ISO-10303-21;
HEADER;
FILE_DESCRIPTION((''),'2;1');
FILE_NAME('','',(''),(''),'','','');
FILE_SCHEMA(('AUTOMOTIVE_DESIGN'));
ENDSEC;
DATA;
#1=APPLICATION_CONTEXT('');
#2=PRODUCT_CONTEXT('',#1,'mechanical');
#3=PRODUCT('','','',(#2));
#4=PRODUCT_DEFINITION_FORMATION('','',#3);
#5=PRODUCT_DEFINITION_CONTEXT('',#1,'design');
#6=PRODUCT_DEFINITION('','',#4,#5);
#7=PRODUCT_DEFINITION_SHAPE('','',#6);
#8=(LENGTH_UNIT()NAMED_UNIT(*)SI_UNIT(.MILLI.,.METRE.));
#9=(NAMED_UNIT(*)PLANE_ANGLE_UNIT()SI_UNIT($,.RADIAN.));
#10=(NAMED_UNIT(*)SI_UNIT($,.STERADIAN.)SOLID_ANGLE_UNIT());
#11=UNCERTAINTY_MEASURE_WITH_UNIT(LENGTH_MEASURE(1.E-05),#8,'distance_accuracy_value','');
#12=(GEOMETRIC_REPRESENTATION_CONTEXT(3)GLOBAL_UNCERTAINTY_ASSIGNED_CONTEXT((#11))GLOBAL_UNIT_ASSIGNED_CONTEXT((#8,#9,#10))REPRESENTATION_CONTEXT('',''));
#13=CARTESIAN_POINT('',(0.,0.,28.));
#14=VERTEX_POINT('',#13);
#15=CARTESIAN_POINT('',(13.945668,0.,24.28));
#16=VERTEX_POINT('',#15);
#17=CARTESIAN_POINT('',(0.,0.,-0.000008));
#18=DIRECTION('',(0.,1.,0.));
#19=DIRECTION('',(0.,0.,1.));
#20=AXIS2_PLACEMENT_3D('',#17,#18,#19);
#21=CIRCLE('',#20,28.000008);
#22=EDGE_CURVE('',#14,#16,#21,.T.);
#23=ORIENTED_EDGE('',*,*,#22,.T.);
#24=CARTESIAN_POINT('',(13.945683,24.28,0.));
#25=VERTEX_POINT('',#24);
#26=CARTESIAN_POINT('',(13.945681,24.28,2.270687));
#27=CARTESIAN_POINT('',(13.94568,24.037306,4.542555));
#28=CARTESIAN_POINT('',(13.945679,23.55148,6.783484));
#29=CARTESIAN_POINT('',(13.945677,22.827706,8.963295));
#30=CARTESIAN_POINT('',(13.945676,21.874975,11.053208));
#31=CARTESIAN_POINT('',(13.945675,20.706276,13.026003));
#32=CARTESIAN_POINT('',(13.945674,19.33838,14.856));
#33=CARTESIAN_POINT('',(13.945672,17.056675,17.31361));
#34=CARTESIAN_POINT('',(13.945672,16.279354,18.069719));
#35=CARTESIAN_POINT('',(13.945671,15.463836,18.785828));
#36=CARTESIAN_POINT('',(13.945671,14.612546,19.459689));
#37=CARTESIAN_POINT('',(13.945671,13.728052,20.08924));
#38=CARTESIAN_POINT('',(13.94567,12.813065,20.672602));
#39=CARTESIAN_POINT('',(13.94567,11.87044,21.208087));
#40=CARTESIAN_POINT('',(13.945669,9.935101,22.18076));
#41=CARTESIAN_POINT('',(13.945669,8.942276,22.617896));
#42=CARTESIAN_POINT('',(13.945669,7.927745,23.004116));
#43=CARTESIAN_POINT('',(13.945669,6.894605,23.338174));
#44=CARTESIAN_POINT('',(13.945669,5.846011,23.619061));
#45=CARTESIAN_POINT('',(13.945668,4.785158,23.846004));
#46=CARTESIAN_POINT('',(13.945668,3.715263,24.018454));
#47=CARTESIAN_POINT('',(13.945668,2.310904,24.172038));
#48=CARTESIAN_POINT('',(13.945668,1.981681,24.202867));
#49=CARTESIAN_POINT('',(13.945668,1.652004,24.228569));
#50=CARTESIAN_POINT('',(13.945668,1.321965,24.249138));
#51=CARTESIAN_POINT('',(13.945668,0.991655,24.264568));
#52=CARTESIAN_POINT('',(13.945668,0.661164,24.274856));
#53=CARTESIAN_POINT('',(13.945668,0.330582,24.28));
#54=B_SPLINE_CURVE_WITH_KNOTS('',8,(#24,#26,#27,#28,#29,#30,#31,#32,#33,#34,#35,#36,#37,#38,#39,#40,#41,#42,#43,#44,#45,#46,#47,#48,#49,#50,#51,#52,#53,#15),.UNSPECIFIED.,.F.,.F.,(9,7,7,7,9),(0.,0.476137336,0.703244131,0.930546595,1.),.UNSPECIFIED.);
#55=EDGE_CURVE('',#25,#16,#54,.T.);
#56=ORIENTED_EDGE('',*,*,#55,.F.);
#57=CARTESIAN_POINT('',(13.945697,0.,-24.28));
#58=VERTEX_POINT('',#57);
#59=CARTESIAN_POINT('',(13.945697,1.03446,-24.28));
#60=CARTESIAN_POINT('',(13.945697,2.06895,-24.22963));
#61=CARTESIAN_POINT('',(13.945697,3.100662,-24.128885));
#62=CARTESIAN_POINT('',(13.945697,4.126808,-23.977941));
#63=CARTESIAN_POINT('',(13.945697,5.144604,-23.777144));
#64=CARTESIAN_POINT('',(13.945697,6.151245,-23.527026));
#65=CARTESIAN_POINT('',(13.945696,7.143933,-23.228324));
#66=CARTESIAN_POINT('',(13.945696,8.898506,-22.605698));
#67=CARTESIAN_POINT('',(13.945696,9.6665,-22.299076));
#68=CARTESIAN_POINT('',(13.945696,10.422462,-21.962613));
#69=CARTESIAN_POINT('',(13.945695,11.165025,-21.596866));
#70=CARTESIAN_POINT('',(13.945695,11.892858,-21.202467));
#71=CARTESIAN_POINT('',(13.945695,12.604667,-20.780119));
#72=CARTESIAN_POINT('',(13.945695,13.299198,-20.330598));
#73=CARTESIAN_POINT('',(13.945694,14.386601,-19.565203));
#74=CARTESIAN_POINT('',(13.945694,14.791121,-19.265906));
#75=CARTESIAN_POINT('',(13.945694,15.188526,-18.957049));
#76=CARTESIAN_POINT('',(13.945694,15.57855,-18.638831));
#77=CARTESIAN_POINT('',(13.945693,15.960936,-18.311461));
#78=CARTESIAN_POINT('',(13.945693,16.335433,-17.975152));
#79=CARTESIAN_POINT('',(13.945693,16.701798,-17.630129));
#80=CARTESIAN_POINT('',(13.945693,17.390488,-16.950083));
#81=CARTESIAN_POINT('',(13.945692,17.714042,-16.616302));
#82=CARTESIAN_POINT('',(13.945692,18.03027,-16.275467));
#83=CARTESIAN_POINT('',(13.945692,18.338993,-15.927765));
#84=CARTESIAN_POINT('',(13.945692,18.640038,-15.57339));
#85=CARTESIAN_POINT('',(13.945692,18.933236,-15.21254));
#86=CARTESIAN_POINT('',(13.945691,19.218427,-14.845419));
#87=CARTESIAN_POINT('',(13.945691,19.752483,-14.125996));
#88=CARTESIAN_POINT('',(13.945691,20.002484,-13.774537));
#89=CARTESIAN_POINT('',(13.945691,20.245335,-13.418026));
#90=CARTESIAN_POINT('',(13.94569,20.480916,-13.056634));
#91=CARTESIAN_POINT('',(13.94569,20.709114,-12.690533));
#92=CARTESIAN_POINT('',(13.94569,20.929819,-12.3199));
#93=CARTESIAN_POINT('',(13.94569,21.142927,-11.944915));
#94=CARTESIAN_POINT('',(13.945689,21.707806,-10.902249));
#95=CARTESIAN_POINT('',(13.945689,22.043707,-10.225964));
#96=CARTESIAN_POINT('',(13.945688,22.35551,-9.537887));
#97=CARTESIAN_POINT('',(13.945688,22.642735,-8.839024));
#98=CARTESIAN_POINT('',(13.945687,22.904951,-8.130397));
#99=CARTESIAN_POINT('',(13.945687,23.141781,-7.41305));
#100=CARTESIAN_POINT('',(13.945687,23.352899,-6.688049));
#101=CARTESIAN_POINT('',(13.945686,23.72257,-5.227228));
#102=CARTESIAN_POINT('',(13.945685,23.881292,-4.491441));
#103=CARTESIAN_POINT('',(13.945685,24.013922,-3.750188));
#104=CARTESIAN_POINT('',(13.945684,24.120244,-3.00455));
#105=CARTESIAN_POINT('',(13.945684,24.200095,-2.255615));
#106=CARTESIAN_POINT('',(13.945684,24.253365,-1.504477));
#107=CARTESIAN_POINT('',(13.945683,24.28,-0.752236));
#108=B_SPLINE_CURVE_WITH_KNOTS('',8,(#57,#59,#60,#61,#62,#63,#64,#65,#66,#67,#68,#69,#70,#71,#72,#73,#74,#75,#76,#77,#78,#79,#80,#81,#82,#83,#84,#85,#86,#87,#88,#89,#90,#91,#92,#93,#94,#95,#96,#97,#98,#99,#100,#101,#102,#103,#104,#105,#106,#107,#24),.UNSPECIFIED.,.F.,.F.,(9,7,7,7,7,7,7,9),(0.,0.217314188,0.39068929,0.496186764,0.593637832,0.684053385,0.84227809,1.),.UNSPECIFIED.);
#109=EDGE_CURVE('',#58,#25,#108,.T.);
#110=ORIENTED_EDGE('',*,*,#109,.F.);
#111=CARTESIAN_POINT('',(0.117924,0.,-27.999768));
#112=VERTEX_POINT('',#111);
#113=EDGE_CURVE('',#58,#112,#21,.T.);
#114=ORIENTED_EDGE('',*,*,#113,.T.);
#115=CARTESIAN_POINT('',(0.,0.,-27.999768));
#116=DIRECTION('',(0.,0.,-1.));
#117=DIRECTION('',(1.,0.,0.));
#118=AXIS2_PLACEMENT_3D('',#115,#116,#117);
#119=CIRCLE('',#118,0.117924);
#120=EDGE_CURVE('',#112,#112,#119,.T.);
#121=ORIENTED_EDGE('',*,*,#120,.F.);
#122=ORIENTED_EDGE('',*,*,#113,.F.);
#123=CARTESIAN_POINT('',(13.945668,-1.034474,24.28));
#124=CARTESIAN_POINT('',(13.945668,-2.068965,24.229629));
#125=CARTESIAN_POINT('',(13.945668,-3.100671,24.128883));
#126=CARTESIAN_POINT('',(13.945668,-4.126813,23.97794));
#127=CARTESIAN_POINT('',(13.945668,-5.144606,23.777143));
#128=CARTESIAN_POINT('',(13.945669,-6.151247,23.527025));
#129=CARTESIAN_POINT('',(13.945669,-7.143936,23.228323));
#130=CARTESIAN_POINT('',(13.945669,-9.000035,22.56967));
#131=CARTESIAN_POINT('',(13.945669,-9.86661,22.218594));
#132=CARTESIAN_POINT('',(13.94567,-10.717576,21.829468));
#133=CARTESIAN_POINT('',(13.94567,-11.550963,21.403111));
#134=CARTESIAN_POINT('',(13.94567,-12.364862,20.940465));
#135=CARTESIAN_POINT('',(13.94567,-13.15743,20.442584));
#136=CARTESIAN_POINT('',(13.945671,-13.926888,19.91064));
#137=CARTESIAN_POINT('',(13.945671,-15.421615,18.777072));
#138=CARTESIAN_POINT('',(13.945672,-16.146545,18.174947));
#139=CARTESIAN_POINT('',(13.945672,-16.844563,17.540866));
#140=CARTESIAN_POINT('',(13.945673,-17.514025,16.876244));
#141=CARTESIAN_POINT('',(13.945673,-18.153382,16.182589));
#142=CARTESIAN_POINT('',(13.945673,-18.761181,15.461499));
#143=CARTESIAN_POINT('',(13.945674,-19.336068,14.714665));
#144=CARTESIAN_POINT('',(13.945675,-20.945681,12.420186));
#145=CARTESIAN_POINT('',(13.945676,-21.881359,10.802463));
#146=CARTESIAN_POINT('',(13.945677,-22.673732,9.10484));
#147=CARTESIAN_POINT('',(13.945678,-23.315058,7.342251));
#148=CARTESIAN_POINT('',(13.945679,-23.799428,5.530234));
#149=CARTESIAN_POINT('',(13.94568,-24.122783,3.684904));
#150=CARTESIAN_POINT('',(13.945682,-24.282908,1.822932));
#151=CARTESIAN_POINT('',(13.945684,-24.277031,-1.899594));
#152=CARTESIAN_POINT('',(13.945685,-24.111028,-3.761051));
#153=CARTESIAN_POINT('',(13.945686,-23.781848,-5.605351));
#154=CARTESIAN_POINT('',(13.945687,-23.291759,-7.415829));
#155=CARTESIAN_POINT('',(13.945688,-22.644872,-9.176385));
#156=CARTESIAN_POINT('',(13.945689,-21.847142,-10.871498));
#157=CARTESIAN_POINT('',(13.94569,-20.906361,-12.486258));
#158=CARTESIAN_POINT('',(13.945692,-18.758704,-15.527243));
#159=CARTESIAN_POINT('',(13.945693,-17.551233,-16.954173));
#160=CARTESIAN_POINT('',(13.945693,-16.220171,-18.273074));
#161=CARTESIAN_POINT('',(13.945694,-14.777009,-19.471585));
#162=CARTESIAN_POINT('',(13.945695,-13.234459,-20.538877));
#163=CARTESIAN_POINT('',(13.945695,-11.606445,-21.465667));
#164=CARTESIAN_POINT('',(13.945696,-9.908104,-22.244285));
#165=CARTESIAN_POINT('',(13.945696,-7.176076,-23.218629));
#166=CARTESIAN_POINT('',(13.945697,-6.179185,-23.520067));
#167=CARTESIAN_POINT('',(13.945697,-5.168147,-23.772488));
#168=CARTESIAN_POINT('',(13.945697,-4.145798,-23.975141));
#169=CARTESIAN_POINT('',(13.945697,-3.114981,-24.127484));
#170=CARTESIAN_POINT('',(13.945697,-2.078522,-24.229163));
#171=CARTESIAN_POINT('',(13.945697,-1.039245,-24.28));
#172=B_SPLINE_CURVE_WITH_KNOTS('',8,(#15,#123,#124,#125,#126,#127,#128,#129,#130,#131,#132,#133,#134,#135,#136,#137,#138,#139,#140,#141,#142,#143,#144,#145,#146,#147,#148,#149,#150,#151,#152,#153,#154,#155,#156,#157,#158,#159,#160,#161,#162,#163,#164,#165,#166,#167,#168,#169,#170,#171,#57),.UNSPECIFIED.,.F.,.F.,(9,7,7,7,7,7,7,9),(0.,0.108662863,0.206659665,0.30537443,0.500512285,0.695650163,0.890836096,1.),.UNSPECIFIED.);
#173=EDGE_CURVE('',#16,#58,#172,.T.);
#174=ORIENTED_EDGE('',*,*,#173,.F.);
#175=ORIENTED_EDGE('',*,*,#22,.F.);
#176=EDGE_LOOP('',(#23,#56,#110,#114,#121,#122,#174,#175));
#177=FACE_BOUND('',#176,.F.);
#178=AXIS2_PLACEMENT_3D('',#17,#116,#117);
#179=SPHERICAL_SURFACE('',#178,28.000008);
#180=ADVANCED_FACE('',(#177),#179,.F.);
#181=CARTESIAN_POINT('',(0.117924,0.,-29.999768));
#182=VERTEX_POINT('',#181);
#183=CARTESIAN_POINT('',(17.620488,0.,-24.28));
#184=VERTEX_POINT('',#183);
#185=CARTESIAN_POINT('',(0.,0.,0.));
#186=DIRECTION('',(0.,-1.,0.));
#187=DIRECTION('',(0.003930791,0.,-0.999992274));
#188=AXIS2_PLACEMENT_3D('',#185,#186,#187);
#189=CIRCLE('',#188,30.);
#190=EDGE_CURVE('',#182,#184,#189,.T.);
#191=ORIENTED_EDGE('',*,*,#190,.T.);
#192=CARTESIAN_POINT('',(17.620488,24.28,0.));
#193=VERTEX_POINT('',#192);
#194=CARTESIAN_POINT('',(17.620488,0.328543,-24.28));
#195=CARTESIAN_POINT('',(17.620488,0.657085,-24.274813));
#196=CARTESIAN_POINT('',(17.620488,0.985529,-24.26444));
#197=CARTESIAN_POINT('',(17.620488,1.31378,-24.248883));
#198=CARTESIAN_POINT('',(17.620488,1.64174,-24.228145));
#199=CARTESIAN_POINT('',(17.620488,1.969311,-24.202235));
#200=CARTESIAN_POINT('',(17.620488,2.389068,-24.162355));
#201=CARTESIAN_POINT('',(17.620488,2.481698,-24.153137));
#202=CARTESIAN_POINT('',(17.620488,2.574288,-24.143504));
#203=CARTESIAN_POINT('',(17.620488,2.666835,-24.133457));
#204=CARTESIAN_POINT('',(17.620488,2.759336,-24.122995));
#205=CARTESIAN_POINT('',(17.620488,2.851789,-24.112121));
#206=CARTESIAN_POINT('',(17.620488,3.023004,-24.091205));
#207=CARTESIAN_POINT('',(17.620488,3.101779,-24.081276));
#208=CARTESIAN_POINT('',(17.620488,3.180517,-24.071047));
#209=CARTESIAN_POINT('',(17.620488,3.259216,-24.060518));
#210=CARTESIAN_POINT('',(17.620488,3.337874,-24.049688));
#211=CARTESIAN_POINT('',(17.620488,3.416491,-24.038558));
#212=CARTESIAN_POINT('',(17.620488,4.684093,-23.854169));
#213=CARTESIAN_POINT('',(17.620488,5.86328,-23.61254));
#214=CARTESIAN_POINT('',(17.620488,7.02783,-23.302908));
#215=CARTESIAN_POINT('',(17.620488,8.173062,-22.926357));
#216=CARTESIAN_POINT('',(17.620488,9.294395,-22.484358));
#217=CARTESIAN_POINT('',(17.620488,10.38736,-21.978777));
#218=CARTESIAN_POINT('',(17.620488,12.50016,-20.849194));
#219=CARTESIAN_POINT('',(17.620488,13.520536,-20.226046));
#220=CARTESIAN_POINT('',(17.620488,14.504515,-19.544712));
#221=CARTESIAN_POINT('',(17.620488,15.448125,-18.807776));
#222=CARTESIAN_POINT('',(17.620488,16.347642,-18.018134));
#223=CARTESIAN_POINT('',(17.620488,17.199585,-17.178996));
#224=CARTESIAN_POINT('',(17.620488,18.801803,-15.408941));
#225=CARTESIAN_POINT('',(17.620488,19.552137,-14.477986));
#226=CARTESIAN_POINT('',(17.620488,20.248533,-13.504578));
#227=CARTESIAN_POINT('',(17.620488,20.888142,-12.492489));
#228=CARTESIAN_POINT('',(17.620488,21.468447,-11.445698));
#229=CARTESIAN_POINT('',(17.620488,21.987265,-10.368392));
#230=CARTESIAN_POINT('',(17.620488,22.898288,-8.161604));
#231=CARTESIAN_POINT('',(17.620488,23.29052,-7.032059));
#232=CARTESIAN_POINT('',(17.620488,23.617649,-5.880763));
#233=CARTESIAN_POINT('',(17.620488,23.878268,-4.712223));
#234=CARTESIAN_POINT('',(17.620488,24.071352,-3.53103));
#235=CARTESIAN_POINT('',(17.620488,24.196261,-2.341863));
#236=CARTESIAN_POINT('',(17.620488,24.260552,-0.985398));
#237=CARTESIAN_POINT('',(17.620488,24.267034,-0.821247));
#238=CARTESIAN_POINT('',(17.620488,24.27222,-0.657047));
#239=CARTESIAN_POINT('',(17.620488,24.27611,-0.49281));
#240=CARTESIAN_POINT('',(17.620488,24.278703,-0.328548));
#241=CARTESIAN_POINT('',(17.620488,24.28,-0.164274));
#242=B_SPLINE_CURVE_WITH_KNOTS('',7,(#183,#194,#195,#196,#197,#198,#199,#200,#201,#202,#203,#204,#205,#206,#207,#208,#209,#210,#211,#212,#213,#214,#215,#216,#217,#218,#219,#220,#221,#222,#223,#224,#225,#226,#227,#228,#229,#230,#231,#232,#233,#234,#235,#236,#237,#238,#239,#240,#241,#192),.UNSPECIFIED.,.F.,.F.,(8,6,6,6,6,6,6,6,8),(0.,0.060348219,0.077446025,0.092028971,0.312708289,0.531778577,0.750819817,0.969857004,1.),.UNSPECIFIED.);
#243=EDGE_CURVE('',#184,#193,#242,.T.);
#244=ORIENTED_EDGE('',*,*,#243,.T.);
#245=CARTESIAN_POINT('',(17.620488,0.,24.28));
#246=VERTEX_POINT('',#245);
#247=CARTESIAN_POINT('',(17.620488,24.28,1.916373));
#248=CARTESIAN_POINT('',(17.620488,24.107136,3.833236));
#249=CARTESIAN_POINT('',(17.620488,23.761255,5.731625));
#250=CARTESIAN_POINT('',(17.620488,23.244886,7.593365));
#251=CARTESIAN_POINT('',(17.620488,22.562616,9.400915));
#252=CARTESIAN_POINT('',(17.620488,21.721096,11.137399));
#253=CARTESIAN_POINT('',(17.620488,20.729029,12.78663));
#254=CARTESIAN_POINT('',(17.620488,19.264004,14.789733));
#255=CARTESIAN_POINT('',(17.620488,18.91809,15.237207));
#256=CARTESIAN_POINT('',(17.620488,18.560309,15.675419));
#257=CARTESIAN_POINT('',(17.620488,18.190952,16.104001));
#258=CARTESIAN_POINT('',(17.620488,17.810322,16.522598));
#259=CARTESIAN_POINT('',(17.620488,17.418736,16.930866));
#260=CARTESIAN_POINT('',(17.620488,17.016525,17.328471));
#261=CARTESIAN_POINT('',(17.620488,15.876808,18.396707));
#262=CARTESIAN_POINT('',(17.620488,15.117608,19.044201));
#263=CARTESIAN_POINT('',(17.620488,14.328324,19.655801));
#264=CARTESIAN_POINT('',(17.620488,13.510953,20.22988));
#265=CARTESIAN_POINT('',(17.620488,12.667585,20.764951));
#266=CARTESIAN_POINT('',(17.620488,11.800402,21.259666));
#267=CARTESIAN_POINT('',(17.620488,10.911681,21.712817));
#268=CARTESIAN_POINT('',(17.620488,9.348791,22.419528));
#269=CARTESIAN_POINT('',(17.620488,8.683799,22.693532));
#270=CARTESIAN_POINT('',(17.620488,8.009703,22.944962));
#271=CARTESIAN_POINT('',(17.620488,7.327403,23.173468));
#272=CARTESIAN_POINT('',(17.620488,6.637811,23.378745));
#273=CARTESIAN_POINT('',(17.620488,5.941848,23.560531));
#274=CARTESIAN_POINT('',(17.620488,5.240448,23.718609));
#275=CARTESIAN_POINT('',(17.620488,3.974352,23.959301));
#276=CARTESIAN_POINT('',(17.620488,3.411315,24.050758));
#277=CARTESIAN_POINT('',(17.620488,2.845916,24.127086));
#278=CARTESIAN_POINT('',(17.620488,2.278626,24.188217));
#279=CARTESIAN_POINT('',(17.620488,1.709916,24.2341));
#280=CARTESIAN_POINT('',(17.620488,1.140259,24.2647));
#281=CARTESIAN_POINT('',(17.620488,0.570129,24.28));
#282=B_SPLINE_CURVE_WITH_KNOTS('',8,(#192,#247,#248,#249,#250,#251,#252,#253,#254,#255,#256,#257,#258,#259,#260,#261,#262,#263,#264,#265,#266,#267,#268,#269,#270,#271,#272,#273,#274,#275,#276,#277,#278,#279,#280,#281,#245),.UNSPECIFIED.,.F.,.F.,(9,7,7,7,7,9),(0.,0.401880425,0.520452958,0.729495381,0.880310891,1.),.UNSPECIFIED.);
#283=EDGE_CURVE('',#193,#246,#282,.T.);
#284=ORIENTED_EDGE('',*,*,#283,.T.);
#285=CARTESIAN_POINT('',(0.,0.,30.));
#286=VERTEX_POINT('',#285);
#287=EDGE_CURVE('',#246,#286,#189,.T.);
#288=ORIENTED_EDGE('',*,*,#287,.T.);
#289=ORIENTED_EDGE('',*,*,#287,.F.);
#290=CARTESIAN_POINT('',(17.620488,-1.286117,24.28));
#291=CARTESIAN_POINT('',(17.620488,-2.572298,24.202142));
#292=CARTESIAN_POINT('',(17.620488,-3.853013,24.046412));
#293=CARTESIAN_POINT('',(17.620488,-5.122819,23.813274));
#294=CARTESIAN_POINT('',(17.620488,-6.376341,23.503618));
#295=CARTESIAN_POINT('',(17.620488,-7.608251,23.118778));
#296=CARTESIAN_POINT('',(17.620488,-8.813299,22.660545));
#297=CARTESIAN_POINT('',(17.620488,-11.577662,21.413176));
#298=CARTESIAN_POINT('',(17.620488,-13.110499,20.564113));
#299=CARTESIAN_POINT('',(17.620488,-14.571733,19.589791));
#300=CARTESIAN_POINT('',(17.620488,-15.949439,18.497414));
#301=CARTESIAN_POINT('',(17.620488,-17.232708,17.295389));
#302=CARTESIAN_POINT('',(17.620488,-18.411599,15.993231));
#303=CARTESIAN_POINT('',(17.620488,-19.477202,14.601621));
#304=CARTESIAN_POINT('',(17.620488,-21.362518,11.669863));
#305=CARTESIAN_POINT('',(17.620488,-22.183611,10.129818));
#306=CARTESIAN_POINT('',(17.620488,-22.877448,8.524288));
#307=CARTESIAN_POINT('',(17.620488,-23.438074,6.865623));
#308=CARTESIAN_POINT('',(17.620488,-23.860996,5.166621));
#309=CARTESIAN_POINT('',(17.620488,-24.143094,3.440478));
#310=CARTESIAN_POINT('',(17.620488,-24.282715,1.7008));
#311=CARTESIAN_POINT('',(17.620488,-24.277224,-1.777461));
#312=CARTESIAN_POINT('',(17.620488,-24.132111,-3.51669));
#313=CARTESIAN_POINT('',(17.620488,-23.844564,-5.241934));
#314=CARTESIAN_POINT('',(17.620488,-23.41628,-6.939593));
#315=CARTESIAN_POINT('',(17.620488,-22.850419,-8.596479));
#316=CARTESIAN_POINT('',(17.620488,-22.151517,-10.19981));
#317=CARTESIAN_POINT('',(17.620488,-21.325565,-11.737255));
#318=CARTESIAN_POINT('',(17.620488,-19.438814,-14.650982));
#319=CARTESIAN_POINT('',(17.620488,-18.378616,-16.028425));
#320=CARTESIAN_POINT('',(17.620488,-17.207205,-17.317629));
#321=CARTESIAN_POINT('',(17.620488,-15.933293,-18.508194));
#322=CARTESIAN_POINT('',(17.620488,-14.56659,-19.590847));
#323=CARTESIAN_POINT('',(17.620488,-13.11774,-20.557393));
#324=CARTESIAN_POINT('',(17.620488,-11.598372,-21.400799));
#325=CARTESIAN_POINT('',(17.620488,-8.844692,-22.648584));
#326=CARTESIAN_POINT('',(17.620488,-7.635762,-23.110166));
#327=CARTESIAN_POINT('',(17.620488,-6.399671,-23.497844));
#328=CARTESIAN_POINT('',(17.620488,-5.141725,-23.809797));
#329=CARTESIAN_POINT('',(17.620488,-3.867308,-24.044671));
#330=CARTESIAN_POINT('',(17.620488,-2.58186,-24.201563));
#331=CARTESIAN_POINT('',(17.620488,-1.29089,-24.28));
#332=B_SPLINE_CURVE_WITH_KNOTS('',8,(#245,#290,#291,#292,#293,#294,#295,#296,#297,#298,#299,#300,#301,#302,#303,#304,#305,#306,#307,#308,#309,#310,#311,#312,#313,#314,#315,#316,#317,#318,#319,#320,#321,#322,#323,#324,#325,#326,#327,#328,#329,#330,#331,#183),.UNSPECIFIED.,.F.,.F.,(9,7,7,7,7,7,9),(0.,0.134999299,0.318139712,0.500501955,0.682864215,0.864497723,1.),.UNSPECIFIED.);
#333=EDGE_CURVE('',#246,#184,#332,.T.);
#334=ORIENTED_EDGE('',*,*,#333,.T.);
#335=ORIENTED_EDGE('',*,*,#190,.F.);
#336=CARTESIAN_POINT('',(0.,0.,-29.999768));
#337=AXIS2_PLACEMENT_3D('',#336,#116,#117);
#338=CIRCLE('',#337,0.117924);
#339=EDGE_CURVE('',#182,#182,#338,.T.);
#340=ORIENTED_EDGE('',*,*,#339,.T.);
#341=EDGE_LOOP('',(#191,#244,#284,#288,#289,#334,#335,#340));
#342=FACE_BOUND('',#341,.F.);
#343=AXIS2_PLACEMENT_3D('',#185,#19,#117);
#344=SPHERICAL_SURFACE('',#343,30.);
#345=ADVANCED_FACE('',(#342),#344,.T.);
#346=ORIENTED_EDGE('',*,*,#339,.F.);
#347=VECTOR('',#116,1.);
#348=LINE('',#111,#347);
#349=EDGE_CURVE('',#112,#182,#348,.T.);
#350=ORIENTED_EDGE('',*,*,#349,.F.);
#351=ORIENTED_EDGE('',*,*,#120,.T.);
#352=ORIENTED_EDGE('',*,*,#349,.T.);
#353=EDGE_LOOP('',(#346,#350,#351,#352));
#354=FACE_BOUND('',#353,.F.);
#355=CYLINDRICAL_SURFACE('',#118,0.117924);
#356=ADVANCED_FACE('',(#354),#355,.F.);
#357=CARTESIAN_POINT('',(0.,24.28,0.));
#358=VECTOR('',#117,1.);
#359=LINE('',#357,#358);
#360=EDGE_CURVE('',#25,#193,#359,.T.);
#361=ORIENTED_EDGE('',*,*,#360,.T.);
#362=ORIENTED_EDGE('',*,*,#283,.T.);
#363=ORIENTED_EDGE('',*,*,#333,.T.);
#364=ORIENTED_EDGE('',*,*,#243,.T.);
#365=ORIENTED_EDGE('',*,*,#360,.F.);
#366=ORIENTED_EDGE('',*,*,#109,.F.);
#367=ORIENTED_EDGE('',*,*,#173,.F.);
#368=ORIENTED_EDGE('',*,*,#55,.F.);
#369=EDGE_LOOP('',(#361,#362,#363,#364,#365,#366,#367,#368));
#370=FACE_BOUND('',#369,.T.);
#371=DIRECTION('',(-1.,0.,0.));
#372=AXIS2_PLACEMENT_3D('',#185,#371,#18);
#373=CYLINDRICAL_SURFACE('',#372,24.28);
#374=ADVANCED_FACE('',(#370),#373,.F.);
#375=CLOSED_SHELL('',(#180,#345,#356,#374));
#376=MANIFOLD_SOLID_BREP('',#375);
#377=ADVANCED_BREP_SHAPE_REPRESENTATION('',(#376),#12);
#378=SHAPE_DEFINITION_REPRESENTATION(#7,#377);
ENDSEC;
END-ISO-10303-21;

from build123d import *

# Parameters (mm, degrees)
F2_R     = 24.28
F3_DEPTH = 38.8


# Not quite as in the source:
# - a feature names something its author has since deleted; it is built from what else it names


with BuildPart() as f1:
    # F0 (on Front) → F1 (revolve)
    with BuildSketch(Plane.XZ):
        with BuildLine():
            Line((0.1179237399, -27.9997682323), (0.1179237399, -29.9997682323))
            ThreePointArc((0.1179237399, -29.9997682323), (29.999942058, 0.0589619838), (0, 30))
            Line((0, 30), (0, 28))
            ThreePointArc((0, 28), (27.9999461967, 0.0589537232), (0.1179237399, -27.9997682323))
        make_face()
    revolve(axis=Axis((0, 0, 40.6766095488), (0, 0, -1)))

    # F2 (on Right) → F3 (cut)
    with BuildSketch(Plane.YZ):
        Circle(F2_R)
    extrude(amount=F3_DEPTH, mode=Mode.SUBTRACT)


solid = f1.part
